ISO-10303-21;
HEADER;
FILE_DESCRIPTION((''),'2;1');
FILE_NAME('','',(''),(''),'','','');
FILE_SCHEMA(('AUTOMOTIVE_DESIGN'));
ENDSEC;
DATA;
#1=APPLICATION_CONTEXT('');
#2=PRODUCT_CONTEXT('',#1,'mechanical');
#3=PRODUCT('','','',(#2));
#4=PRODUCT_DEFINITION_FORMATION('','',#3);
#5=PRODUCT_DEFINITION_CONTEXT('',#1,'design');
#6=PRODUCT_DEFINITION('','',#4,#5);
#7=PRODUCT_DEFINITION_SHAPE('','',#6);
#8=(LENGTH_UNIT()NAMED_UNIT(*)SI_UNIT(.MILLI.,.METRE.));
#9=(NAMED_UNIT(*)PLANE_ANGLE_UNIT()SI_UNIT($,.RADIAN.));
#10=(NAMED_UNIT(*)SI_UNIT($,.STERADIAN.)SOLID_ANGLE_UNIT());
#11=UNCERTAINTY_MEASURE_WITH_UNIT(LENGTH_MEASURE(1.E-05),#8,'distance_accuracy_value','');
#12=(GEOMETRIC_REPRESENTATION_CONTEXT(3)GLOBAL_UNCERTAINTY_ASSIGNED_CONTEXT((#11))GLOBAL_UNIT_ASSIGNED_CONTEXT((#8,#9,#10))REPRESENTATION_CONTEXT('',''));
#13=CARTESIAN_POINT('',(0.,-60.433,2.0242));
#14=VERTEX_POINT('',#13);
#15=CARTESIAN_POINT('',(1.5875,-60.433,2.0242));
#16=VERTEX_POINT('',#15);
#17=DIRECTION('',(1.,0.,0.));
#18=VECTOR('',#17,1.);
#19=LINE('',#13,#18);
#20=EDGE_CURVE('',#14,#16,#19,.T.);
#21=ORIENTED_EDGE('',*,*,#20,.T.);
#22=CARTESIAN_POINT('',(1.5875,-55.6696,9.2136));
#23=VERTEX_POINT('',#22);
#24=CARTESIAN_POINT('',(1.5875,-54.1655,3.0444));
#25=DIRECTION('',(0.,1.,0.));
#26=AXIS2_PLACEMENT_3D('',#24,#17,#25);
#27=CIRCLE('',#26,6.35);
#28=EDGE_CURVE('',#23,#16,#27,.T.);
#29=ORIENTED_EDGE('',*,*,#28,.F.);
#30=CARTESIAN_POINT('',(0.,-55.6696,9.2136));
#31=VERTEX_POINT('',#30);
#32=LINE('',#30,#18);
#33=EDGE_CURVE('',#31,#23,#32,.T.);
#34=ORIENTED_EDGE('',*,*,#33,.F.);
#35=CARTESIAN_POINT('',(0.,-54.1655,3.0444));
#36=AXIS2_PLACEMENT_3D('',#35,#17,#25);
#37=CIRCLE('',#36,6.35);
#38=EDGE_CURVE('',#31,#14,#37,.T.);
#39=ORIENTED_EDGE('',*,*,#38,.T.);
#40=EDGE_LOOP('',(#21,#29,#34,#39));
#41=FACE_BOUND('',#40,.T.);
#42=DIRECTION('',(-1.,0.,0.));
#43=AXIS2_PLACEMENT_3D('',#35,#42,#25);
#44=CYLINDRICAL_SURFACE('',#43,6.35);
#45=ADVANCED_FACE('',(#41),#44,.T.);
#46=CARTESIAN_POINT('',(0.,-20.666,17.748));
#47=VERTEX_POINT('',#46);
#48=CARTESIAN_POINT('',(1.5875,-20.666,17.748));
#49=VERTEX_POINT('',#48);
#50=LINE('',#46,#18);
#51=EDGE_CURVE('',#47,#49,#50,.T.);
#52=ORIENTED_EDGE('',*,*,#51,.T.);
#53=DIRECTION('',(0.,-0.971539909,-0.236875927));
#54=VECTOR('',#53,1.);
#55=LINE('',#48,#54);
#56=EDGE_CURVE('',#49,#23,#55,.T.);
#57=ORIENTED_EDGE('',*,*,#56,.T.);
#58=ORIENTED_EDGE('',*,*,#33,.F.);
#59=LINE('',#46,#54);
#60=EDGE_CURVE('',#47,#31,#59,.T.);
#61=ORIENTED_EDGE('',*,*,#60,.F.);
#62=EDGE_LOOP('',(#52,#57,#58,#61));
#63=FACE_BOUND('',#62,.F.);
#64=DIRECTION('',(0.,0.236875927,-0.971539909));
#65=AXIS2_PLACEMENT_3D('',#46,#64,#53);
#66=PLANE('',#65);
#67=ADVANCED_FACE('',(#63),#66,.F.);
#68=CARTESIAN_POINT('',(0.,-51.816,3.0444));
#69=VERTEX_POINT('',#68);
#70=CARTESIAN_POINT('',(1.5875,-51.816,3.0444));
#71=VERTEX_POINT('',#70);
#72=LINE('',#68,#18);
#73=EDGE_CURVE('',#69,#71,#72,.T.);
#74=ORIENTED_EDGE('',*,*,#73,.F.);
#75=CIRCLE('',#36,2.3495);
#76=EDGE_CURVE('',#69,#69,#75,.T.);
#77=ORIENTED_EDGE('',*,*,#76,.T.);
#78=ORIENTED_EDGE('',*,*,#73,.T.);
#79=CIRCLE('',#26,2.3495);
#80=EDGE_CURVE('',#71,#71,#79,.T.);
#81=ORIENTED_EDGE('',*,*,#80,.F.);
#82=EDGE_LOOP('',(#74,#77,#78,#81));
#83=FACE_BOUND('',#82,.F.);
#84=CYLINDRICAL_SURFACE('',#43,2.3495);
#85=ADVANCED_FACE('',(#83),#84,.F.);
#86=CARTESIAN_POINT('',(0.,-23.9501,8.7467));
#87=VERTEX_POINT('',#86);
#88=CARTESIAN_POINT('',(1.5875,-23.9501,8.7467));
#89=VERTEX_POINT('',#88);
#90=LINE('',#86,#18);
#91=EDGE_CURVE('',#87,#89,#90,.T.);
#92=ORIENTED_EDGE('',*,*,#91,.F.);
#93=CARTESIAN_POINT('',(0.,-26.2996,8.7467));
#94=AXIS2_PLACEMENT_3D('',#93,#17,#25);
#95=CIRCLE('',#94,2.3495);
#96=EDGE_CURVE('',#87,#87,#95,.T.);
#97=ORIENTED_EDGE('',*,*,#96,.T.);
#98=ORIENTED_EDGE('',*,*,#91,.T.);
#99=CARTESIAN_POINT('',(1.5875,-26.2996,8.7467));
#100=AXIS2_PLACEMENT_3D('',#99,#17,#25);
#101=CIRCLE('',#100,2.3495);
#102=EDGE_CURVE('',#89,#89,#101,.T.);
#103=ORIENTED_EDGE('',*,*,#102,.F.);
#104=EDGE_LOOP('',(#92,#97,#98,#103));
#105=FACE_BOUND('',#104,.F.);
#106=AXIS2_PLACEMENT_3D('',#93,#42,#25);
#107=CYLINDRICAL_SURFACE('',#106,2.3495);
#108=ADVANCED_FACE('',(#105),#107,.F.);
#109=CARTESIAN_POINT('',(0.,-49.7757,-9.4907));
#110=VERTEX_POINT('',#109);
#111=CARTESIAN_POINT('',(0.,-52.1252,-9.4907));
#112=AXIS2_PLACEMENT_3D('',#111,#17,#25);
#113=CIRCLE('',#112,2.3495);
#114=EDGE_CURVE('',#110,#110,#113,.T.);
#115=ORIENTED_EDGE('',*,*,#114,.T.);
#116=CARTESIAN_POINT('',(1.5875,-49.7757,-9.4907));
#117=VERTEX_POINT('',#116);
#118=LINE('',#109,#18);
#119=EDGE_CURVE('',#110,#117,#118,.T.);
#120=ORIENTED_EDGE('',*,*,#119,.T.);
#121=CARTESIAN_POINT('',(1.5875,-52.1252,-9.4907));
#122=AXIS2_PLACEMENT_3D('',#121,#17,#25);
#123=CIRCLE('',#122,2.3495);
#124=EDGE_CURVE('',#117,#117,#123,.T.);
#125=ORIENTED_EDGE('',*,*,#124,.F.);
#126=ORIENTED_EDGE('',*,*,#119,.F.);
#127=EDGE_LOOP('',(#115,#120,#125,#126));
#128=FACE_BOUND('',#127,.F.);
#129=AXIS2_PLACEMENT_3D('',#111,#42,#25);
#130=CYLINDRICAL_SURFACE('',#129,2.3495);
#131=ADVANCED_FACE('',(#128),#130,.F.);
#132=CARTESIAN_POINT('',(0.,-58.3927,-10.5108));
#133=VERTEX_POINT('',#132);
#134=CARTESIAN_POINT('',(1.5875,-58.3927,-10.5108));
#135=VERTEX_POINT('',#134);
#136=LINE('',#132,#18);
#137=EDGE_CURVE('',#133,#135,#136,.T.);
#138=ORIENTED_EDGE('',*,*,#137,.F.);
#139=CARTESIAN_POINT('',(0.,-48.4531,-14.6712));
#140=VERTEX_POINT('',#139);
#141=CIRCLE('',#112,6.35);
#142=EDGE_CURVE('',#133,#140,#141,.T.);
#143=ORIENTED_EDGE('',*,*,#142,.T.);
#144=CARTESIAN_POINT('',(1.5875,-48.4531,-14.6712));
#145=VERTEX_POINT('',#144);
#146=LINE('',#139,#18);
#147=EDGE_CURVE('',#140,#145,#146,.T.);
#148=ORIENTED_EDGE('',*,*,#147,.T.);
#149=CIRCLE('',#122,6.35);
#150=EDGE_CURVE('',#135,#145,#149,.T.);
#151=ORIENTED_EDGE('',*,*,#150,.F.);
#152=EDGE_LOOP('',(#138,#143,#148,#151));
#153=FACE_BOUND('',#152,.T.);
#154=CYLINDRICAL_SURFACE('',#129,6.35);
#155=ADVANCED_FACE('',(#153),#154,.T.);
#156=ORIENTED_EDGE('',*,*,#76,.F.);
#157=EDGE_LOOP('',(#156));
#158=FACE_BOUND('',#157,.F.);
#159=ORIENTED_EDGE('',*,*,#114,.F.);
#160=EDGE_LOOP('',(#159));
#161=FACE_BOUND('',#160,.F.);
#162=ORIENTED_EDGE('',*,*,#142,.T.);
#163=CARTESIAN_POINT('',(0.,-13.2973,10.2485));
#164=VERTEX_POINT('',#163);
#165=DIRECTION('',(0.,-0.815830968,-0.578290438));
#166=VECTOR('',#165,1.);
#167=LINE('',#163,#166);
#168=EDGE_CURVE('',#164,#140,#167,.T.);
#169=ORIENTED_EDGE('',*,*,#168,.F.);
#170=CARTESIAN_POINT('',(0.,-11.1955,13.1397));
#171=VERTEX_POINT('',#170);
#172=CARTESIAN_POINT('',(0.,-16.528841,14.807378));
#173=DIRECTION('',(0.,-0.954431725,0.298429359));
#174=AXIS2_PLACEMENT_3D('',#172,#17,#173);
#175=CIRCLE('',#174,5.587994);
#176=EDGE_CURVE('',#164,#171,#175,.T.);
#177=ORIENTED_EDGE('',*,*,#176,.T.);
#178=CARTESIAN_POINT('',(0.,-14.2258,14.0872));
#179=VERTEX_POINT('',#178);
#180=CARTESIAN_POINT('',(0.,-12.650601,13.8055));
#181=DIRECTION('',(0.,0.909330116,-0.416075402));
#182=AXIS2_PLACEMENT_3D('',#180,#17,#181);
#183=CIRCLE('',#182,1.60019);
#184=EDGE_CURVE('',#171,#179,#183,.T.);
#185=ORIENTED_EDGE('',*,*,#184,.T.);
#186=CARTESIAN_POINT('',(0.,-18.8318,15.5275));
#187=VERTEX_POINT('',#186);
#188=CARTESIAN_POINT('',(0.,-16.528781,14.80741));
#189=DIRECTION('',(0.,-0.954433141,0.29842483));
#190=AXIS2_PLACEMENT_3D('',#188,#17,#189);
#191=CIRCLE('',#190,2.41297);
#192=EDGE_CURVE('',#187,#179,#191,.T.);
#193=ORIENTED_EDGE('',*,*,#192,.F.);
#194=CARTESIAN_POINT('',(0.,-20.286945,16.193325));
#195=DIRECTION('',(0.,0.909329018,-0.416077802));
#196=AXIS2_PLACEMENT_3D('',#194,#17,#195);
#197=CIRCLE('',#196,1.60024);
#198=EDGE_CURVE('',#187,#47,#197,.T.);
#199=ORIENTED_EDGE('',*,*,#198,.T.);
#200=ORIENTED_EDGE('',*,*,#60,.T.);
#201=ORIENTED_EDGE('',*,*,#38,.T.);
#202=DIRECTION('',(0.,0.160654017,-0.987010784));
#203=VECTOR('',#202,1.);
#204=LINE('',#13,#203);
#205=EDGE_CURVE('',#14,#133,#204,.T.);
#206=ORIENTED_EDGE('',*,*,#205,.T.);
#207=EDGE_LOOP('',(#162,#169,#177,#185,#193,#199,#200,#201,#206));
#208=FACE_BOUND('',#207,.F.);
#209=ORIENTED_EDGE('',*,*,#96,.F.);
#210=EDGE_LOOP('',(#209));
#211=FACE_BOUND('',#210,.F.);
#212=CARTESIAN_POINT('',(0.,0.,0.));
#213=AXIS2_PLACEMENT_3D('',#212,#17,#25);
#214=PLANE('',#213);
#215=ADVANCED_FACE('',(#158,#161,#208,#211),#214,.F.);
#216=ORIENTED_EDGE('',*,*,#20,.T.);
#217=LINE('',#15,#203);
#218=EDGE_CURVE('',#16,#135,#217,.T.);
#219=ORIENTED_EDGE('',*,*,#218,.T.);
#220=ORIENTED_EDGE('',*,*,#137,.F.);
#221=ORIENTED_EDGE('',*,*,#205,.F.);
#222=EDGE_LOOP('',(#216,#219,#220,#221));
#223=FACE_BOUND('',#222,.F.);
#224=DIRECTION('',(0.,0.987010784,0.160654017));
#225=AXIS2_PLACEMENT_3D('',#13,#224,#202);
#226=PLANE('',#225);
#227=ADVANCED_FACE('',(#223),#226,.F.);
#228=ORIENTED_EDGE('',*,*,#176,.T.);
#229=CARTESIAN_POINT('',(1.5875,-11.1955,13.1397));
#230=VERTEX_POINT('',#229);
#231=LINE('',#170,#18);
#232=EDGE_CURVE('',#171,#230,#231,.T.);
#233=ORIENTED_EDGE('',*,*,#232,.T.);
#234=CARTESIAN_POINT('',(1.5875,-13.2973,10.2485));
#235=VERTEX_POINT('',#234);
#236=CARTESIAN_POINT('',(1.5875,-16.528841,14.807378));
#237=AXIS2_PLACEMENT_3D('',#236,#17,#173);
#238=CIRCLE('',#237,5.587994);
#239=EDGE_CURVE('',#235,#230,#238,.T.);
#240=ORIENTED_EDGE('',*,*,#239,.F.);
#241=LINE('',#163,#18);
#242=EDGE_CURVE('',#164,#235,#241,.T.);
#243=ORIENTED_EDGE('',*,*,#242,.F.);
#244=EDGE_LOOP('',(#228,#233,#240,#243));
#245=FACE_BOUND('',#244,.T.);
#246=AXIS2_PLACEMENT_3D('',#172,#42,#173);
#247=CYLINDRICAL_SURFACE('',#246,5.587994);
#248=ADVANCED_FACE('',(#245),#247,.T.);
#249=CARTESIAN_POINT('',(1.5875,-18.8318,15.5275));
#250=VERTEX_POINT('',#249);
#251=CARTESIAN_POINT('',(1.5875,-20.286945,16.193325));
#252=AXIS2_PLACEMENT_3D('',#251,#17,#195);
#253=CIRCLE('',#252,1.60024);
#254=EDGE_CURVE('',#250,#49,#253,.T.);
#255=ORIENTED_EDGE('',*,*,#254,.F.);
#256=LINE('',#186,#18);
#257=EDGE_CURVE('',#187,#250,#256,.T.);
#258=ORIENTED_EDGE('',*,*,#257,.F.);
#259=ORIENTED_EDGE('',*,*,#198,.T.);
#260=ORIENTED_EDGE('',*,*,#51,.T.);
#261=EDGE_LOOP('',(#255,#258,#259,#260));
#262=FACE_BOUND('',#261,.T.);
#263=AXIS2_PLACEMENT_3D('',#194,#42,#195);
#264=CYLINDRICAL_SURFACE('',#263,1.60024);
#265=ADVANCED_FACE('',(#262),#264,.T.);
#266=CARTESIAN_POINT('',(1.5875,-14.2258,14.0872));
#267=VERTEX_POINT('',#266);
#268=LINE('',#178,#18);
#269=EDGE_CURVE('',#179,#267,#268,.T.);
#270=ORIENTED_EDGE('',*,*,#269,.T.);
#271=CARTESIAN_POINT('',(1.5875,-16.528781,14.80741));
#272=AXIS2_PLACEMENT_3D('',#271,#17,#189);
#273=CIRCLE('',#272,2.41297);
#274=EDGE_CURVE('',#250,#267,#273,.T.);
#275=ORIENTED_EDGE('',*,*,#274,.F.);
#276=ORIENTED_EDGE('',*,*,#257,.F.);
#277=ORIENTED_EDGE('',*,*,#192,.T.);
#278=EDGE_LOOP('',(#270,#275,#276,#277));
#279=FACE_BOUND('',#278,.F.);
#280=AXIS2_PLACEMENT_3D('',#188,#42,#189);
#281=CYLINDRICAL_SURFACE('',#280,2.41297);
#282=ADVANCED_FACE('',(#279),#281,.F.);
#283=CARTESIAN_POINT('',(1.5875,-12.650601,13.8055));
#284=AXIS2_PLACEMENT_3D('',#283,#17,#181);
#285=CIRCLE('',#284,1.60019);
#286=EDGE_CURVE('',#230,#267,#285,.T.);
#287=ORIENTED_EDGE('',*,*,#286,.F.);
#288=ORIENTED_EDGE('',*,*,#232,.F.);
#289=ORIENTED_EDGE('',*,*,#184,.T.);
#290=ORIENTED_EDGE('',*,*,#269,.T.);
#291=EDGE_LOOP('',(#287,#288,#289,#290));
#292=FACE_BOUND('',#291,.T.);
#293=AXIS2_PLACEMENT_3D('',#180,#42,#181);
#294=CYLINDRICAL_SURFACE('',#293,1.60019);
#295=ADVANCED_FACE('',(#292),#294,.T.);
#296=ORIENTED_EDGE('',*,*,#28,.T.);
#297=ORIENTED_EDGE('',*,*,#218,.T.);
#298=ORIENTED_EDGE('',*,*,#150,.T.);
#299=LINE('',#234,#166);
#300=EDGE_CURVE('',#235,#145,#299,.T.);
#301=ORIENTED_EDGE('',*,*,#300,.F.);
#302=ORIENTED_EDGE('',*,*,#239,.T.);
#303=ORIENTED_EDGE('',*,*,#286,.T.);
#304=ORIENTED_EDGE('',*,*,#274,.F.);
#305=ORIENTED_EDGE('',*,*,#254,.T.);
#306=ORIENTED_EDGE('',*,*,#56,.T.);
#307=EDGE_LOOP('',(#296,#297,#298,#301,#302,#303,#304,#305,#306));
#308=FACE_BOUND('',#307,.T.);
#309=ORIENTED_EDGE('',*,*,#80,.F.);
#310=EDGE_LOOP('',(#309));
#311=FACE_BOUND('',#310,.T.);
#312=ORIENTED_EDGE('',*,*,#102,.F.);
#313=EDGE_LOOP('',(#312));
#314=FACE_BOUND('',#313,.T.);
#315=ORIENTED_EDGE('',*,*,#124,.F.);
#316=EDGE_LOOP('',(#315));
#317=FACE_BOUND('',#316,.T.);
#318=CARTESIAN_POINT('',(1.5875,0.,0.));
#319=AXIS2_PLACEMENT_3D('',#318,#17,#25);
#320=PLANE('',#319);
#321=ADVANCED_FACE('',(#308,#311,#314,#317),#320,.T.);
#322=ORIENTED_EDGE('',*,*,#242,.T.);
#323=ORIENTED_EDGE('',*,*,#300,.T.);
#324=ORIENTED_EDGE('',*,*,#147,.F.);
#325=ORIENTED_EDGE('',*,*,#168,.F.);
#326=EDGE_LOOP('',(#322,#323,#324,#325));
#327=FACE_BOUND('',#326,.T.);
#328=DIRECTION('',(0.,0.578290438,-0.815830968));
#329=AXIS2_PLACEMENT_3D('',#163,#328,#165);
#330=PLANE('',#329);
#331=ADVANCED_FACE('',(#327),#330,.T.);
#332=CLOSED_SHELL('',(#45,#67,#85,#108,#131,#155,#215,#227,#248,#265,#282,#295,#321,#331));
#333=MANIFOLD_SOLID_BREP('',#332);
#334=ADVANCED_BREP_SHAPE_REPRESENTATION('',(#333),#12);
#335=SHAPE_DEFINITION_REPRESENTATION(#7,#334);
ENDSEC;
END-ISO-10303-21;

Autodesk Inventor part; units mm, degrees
ref_plane "YZ Plane" through (0, 0, 0) normal (1, 0, 0) x (0, 1, 0)
ref_plane "XZ Plane" through (0, 0, 0) normal (0, 1, 0) x (-1, 0, 0)
ref_plane "XY Plane" through (0, 0, 0) normal (0, 0, 1) x (1, 0, 0)
sketch "Sketch1" plane through (0, 0, 0) normal (1, 0, 0) x (0, 1, 0)
  circle A0 centre (-16.5288, 14.8074) radius 3.9624 construction
  circle A1 centre (-54.1655, 3.0444) radius 2.1844 construction
  circle A2 centre (-52.1252, -9.4907) radius 2.1844 construction
  circle A3 centre (-54.1655, 3.0444) radius 2.3495
  circle A4 centre (-52.1252, -9.4907) radius 2.3495
  circle A5 centre (-54.1655, 3.0444) radius 6.35
  circle A6 centre (-52.1252, -9.4907) radius 6.35
  line L0 (-60.433, 2.0242) -> (-58.3927, -10.5108)
  arc A7 (-18.8318, 15.5275) -> (-14.2258, 14.0872) centre (-16.5288, 14.8074) ccw
  line L1 (-16.5288, 14.8074) -> (-18.8318, 15.5275) construction
  line L2 (-16.5288, 14.8074) -> (-14.2258, 14.0872) construction
  arc A8 (-21.8622, 16.475) -> (-11.1955, 13.1397) centre (-16.5288, 14.8074) ccw
  line L3 (-11.1955, 13.1397) -> (-21.8622, 16.475)
  arc A9 (-11.1955, 13.1397) -> (-14.2258, 14.0872) centre (-12.6506, 13.8055) ccw
  arc A10 (-18.8318, 15.5275) -> (-21.8622, 16.475) centre (-20.287, 16.1933) ccw
  line L4 (-20.666, 17.748) -> (-55.6696, 9.2136)
  line L5 (-13.2973, 10.2485) -> (-48.4531, -14.6712)
  circle A11 centre (-26.2996, 8.7467) radius 2.3495
  point P0 (0, 0)
  point P1 (-18.8318, 15.5275)
  dimension "d0" = 4.699
  dimension "d1" = 4.699
  dimension "d4" = 12.7
  dimension "d5" = 12.7
  dimension "d6" = 2.413
  dimension "d7" = 180
  dimension "d8" = 3.175
  dimension "d9" = 1.6002
  dimension "d10" = 1.6002
  dimension "d11" = 4.699
extrude "Plate1" add sketch "Sketch1" along normal blind 1.5875 contours A5 | A5 L4 A10 A8 L5 A6 | A6 L0 A5 | A6 | A7 L3 A8
sheet face with bend "Face2" sketch "Sketch1" thickness 1.5875 toward (1, 0, 0) bend radius 1.5875 contours A10 L3 | A9 L3
bend "Bend1"
equation "\"d12\" = Thickness"
equation "\"d13\" = BendRadius"
equation "\"d14\" = BendReliefWidth"
equation "\"d16\" = MinimumRemnant"
equation "\"d15\" = BendReliefDepth"
equation "\"d17\" = TransitionRadius"
equation "\"BendRadius\" = Thickness"
equation "\"BendReliefWidth\" = Thickness"
equation "\"BendReliefDepth\" = 0.5 * Thickness"
equation "\"CornerReliefSize\" = 4 * Thickness"
equation "\"MinimumRemnant\" = 2 * Thickness"
equation "\"TransitionRadius\" = BendRadius"
equation "\"JacobiRadiusSize\" = BendRadius"
equation "\"GapSize\" = Thickness"
equation "\"Thickness\" = 1.5875"
properties part number "hangPin"
